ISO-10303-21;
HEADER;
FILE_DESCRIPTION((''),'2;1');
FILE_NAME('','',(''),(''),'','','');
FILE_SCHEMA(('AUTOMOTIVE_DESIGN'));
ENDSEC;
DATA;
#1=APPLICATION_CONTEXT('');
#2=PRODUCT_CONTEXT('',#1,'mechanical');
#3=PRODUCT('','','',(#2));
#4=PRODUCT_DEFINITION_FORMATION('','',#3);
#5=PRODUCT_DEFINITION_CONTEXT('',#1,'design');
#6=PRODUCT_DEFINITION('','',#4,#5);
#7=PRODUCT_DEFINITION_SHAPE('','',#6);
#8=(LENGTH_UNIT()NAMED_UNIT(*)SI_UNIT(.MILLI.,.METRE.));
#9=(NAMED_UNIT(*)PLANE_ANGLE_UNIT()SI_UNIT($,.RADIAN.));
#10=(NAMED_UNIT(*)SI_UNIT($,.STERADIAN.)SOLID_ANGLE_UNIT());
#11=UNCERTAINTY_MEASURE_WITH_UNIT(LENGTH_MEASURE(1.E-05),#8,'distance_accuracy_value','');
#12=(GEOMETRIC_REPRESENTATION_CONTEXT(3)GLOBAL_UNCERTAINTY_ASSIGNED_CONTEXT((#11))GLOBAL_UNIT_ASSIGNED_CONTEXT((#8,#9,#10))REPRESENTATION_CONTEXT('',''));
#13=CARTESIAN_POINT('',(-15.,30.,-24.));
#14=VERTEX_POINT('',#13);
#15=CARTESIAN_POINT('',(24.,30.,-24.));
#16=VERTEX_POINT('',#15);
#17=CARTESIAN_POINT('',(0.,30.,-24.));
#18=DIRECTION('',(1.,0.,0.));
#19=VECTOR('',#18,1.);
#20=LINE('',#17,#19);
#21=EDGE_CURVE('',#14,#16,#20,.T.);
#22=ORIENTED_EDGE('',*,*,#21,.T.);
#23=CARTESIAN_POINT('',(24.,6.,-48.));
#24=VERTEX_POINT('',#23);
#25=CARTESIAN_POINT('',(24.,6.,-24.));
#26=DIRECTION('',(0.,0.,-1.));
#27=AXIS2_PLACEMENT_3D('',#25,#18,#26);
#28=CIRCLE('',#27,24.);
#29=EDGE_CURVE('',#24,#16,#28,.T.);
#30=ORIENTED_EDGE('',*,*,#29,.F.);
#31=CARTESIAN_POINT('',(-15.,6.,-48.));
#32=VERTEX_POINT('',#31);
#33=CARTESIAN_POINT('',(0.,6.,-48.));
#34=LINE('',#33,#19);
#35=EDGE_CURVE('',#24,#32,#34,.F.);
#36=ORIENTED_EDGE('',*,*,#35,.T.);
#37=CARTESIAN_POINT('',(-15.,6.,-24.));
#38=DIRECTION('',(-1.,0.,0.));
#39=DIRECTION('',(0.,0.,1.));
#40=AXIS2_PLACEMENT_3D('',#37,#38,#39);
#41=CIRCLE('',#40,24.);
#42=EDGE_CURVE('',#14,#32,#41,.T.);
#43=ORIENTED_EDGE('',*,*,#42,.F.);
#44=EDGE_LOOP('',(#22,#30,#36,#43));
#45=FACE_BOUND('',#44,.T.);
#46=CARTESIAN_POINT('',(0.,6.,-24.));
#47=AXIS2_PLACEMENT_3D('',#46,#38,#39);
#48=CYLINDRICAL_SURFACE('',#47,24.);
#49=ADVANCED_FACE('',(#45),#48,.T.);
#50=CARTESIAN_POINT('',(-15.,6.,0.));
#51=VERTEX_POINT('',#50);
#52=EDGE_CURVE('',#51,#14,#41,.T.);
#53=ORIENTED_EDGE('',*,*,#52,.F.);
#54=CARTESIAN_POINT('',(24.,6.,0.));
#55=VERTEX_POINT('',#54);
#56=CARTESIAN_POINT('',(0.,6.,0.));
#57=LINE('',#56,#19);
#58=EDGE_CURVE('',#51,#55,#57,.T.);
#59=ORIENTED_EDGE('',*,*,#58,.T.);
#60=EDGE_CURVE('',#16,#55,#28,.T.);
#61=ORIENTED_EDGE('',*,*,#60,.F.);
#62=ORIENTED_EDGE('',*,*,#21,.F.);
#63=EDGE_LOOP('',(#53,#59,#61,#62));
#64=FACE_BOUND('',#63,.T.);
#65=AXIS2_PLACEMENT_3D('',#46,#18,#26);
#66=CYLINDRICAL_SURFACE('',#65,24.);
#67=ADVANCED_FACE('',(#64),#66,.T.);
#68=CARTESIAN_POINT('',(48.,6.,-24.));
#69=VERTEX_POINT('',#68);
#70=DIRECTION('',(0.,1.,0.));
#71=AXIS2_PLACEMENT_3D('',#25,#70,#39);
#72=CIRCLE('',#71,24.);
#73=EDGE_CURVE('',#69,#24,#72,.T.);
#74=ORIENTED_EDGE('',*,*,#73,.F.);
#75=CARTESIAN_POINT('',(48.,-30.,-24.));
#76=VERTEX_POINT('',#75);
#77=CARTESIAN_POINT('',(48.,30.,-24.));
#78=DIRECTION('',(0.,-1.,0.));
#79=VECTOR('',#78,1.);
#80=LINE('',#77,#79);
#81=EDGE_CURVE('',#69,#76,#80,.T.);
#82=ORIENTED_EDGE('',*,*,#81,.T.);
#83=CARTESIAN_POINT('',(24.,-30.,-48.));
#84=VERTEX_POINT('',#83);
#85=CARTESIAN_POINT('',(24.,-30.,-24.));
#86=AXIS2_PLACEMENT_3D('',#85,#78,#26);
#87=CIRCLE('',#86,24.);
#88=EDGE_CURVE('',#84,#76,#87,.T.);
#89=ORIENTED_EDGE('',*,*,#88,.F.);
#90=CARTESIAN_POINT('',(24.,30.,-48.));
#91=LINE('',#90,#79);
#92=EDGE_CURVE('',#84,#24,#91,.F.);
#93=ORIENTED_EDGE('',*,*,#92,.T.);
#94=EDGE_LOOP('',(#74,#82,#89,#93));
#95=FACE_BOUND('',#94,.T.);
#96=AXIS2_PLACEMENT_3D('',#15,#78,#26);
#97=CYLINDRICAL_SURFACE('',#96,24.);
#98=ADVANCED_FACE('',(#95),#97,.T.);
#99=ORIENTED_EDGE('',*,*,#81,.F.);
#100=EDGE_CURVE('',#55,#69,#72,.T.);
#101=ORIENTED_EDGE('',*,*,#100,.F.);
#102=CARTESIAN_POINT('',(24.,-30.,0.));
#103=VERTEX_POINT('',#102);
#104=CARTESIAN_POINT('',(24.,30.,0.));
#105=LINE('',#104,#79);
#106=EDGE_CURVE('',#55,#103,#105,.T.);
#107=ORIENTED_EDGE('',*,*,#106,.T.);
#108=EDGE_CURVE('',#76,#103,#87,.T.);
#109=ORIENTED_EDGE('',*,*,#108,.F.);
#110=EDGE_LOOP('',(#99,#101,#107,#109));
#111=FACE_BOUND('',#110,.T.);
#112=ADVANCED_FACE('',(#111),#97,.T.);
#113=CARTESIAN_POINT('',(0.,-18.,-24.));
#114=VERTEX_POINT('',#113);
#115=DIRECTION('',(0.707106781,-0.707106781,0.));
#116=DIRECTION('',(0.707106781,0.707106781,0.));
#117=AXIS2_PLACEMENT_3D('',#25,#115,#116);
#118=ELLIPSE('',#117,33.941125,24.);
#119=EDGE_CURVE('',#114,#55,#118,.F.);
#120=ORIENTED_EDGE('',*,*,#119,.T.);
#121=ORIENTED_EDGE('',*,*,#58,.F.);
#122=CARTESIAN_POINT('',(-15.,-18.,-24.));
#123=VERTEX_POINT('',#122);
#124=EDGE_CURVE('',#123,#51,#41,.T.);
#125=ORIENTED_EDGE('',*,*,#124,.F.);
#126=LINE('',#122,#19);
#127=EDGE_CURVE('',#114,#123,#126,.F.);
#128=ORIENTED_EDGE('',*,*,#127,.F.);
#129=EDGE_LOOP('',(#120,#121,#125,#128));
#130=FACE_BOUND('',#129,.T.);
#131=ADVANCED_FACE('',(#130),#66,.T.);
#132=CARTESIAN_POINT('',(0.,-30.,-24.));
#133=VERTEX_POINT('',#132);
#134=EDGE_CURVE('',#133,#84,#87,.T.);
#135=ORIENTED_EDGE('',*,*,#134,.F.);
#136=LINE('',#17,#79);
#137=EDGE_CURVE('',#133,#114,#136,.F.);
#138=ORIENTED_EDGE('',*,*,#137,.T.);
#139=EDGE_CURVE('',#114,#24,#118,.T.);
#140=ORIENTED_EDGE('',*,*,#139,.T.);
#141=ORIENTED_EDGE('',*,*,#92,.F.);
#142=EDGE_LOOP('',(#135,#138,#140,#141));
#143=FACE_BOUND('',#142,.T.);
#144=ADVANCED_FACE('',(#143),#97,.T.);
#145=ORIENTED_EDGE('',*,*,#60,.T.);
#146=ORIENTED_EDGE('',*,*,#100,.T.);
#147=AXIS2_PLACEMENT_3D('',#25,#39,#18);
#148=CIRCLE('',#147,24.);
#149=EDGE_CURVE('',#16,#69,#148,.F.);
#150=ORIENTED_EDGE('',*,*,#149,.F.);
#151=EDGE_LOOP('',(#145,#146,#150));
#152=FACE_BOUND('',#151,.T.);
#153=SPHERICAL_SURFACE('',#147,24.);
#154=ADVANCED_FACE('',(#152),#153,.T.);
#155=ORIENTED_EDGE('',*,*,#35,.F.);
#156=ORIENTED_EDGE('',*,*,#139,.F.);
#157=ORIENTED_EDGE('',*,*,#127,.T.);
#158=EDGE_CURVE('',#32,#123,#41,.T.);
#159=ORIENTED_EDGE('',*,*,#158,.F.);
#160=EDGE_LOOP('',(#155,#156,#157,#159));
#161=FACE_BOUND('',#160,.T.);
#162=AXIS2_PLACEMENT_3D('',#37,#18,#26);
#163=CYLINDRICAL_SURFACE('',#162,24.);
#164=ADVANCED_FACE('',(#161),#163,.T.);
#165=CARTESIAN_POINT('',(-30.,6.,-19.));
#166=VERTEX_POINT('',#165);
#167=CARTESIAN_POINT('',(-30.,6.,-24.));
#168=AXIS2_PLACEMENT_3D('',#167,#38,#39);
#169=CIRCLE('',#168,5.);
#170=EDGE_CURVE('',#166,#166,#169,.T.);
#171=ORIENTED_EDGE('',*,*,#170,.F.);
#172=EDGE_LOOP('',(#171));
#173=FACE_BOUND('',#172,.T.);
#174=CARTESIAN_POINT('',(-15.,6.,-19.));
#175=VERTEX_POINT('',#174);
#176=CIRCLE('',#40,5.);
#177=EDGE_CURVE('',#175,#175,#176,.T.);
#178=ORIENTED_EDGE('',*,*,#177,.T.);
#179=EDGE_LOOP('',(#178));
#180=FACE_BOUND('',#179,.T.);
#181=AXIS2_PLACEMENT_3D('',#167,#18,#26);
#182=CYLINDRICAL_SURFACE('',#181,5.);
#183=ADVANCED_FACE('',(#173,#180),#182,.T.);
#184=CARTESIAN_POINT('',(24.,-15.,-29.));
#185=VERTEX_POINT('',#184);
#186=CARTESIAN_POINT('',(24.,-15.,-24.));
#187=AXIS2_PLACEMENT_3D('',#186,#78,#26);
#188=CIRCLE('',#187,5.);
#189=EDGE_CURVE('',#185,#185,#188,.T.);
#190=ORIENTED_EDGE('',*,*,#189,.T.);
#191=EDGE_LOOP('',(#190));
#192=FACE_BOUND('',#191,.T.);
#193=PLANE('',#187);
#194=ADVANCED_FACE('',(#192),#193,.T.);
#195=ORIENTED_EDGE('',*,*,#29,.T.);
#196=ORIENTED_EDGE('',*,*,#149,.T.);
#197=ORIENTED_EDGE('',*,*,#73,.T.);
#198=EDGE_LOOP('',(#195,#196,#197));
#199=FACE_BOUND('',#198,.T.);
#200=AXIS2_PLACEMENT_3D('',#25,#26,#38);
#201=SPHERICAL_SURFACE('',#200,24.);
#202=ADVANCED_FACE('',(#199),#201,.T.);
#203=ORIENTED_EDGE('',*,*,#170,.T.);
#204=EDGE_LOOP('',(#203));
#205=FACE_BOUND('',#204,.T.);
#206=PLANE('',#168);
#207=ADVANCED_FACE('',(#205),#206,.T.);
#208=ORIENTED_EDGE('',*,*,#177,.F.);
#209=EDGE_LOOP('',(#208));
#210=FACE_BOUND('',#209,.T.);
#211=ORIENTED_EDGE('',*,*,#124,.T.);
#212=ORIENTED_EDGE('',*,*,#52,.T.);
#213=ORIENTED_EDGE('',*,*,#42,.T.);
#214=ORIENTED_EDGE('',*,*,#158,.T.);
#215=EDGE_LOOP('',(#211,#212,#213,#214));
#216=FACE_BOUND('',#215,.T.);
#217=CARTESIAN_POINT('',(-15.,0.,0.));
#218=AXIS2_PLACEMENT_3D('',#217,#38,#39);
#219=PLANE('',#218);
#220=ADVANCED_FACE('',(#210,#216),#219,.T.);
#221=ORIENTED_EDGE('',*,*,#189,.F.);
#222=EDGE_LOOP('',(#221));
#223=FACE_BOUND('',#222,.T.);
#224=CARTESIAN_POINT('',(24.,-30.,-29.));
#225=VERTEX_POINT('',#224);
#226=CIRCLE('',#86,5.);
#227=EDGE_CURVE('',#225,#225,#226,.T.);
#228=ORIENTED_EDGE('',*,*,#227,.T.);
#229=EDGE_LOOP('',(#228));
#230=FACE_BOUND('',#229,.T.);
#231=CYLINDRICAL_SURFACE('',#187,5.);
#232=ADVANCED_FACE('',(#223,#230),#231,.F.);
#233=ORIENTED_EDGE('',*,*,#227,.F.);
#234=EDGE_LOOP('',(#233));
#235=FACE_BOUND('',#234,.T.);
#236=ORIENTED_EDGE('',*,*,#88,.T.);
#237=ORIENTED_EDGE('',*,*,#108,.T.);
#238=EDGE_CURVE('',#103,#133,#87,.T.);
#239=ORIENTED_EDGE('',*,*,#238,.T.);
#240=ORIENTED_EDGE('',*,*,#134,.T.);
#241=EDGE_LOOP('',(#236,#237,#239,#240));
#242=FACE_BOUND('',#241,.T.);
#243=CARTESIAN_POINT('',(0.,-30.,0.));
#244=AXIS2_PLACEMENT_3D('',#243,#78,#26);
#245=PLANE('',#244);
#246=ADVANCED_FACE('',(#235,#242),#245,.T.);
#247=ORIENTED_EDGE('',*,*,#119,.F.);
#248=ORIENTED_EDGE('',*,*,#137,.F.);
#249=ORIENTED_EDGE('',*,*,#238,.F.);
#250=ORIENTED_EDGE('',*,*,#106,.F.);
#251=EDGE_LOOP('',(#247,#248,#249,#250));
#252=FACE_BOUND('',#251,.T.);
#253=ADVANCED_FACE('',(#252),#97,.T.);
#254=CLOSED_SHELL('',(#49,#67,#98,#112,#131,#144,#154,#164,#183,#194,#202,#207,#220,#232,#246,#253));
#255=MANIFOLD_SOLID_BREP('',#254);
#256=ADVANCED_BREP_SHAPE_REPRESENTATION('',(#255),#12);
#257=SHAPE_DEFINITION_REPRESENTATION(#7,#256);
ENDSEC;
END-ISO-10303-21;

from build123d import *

# Parameters (mm, degrees)
SKETCH1_W           = 48
SKETCH1_H           = 48
BOSS_EXTRUDE1_DEPTH = 30
SKETCH3_W           = 48
SKETCH3_H           = 48
BOSS_EXTRUDE2_DEPTH = 15
FILLET1_R           = 24
SKETCH4_R           = 5
CUT_EXTRUDE1_DEPTH  = 15
SKETCH5_R           = 5
BOSS_EXTRUDE3_DEPTH = 15


with BuildPart() as part:
    # Sketch1 → Boss-Extrude1 (new, symmetric)
    with BuildSketch(Plane(origin=(0, 0, 0), x_dir=(1, 0, 0), z_dir=(0, 1, 0))):
        with Locations((24, 24)):
            Rectangle(SKETCH1_W, SKETCH1_H)
    extrude(amount=BOSS_EXTRUDE1_DEPTH, both=True)

    # Sketch3 → Boss-Extrude2 (add)
    with BuildSketch(Plane.ZY):
        with Locations((-24, 6)):
            Rectangle(SKETCH3_W, SKETCH3_H)
    extrude(amount=BOSS_EXTRUDE2_DEPTH)

    # Fillet1
    fillet1_edges = [part.edges().sort_by_distance(p)[0] for p in [
        (48, 30, -24),
        (0, -24, 0),
        (0, -24, -48),
        (-7.5, -18, -48),
        (16.5, 30, -48),
        (-7.5, -18, 0),
        (48, 0, -48),
        (48, 0, 0),
        (16.5, 30, 0),
    ]]
    fillet(fillet1_edges, radius=FILLET1_R - 0.0001)  # a hair under: the kernel refuses the full size

    # Sketch4 → Cut-Extrude1 (cut)
    with BuildSketch(Plane(origin=(0, -30, 0), x_dir=(-1, 0, 0), z_dir=(0, -1, 0))):
        with Locations(Location((-24, 24, 0), (0, 0, 90))):
            Circle(SKETCH4_R)
    extrude(amount=-CUT_EXTRUDE1_DEPTH, mode=Mode.SUBTRACT)

    # Sketch5 → Boss-Extrude3 (add)
    with BuildSketch(Plane.ZY.offset(15)):
        with Locations((-24, 6)):
            Circle(SKETCH5_R)
    extrude(amount=BOSS_EXTRUDE3_DEPTH)


solid = part.part
